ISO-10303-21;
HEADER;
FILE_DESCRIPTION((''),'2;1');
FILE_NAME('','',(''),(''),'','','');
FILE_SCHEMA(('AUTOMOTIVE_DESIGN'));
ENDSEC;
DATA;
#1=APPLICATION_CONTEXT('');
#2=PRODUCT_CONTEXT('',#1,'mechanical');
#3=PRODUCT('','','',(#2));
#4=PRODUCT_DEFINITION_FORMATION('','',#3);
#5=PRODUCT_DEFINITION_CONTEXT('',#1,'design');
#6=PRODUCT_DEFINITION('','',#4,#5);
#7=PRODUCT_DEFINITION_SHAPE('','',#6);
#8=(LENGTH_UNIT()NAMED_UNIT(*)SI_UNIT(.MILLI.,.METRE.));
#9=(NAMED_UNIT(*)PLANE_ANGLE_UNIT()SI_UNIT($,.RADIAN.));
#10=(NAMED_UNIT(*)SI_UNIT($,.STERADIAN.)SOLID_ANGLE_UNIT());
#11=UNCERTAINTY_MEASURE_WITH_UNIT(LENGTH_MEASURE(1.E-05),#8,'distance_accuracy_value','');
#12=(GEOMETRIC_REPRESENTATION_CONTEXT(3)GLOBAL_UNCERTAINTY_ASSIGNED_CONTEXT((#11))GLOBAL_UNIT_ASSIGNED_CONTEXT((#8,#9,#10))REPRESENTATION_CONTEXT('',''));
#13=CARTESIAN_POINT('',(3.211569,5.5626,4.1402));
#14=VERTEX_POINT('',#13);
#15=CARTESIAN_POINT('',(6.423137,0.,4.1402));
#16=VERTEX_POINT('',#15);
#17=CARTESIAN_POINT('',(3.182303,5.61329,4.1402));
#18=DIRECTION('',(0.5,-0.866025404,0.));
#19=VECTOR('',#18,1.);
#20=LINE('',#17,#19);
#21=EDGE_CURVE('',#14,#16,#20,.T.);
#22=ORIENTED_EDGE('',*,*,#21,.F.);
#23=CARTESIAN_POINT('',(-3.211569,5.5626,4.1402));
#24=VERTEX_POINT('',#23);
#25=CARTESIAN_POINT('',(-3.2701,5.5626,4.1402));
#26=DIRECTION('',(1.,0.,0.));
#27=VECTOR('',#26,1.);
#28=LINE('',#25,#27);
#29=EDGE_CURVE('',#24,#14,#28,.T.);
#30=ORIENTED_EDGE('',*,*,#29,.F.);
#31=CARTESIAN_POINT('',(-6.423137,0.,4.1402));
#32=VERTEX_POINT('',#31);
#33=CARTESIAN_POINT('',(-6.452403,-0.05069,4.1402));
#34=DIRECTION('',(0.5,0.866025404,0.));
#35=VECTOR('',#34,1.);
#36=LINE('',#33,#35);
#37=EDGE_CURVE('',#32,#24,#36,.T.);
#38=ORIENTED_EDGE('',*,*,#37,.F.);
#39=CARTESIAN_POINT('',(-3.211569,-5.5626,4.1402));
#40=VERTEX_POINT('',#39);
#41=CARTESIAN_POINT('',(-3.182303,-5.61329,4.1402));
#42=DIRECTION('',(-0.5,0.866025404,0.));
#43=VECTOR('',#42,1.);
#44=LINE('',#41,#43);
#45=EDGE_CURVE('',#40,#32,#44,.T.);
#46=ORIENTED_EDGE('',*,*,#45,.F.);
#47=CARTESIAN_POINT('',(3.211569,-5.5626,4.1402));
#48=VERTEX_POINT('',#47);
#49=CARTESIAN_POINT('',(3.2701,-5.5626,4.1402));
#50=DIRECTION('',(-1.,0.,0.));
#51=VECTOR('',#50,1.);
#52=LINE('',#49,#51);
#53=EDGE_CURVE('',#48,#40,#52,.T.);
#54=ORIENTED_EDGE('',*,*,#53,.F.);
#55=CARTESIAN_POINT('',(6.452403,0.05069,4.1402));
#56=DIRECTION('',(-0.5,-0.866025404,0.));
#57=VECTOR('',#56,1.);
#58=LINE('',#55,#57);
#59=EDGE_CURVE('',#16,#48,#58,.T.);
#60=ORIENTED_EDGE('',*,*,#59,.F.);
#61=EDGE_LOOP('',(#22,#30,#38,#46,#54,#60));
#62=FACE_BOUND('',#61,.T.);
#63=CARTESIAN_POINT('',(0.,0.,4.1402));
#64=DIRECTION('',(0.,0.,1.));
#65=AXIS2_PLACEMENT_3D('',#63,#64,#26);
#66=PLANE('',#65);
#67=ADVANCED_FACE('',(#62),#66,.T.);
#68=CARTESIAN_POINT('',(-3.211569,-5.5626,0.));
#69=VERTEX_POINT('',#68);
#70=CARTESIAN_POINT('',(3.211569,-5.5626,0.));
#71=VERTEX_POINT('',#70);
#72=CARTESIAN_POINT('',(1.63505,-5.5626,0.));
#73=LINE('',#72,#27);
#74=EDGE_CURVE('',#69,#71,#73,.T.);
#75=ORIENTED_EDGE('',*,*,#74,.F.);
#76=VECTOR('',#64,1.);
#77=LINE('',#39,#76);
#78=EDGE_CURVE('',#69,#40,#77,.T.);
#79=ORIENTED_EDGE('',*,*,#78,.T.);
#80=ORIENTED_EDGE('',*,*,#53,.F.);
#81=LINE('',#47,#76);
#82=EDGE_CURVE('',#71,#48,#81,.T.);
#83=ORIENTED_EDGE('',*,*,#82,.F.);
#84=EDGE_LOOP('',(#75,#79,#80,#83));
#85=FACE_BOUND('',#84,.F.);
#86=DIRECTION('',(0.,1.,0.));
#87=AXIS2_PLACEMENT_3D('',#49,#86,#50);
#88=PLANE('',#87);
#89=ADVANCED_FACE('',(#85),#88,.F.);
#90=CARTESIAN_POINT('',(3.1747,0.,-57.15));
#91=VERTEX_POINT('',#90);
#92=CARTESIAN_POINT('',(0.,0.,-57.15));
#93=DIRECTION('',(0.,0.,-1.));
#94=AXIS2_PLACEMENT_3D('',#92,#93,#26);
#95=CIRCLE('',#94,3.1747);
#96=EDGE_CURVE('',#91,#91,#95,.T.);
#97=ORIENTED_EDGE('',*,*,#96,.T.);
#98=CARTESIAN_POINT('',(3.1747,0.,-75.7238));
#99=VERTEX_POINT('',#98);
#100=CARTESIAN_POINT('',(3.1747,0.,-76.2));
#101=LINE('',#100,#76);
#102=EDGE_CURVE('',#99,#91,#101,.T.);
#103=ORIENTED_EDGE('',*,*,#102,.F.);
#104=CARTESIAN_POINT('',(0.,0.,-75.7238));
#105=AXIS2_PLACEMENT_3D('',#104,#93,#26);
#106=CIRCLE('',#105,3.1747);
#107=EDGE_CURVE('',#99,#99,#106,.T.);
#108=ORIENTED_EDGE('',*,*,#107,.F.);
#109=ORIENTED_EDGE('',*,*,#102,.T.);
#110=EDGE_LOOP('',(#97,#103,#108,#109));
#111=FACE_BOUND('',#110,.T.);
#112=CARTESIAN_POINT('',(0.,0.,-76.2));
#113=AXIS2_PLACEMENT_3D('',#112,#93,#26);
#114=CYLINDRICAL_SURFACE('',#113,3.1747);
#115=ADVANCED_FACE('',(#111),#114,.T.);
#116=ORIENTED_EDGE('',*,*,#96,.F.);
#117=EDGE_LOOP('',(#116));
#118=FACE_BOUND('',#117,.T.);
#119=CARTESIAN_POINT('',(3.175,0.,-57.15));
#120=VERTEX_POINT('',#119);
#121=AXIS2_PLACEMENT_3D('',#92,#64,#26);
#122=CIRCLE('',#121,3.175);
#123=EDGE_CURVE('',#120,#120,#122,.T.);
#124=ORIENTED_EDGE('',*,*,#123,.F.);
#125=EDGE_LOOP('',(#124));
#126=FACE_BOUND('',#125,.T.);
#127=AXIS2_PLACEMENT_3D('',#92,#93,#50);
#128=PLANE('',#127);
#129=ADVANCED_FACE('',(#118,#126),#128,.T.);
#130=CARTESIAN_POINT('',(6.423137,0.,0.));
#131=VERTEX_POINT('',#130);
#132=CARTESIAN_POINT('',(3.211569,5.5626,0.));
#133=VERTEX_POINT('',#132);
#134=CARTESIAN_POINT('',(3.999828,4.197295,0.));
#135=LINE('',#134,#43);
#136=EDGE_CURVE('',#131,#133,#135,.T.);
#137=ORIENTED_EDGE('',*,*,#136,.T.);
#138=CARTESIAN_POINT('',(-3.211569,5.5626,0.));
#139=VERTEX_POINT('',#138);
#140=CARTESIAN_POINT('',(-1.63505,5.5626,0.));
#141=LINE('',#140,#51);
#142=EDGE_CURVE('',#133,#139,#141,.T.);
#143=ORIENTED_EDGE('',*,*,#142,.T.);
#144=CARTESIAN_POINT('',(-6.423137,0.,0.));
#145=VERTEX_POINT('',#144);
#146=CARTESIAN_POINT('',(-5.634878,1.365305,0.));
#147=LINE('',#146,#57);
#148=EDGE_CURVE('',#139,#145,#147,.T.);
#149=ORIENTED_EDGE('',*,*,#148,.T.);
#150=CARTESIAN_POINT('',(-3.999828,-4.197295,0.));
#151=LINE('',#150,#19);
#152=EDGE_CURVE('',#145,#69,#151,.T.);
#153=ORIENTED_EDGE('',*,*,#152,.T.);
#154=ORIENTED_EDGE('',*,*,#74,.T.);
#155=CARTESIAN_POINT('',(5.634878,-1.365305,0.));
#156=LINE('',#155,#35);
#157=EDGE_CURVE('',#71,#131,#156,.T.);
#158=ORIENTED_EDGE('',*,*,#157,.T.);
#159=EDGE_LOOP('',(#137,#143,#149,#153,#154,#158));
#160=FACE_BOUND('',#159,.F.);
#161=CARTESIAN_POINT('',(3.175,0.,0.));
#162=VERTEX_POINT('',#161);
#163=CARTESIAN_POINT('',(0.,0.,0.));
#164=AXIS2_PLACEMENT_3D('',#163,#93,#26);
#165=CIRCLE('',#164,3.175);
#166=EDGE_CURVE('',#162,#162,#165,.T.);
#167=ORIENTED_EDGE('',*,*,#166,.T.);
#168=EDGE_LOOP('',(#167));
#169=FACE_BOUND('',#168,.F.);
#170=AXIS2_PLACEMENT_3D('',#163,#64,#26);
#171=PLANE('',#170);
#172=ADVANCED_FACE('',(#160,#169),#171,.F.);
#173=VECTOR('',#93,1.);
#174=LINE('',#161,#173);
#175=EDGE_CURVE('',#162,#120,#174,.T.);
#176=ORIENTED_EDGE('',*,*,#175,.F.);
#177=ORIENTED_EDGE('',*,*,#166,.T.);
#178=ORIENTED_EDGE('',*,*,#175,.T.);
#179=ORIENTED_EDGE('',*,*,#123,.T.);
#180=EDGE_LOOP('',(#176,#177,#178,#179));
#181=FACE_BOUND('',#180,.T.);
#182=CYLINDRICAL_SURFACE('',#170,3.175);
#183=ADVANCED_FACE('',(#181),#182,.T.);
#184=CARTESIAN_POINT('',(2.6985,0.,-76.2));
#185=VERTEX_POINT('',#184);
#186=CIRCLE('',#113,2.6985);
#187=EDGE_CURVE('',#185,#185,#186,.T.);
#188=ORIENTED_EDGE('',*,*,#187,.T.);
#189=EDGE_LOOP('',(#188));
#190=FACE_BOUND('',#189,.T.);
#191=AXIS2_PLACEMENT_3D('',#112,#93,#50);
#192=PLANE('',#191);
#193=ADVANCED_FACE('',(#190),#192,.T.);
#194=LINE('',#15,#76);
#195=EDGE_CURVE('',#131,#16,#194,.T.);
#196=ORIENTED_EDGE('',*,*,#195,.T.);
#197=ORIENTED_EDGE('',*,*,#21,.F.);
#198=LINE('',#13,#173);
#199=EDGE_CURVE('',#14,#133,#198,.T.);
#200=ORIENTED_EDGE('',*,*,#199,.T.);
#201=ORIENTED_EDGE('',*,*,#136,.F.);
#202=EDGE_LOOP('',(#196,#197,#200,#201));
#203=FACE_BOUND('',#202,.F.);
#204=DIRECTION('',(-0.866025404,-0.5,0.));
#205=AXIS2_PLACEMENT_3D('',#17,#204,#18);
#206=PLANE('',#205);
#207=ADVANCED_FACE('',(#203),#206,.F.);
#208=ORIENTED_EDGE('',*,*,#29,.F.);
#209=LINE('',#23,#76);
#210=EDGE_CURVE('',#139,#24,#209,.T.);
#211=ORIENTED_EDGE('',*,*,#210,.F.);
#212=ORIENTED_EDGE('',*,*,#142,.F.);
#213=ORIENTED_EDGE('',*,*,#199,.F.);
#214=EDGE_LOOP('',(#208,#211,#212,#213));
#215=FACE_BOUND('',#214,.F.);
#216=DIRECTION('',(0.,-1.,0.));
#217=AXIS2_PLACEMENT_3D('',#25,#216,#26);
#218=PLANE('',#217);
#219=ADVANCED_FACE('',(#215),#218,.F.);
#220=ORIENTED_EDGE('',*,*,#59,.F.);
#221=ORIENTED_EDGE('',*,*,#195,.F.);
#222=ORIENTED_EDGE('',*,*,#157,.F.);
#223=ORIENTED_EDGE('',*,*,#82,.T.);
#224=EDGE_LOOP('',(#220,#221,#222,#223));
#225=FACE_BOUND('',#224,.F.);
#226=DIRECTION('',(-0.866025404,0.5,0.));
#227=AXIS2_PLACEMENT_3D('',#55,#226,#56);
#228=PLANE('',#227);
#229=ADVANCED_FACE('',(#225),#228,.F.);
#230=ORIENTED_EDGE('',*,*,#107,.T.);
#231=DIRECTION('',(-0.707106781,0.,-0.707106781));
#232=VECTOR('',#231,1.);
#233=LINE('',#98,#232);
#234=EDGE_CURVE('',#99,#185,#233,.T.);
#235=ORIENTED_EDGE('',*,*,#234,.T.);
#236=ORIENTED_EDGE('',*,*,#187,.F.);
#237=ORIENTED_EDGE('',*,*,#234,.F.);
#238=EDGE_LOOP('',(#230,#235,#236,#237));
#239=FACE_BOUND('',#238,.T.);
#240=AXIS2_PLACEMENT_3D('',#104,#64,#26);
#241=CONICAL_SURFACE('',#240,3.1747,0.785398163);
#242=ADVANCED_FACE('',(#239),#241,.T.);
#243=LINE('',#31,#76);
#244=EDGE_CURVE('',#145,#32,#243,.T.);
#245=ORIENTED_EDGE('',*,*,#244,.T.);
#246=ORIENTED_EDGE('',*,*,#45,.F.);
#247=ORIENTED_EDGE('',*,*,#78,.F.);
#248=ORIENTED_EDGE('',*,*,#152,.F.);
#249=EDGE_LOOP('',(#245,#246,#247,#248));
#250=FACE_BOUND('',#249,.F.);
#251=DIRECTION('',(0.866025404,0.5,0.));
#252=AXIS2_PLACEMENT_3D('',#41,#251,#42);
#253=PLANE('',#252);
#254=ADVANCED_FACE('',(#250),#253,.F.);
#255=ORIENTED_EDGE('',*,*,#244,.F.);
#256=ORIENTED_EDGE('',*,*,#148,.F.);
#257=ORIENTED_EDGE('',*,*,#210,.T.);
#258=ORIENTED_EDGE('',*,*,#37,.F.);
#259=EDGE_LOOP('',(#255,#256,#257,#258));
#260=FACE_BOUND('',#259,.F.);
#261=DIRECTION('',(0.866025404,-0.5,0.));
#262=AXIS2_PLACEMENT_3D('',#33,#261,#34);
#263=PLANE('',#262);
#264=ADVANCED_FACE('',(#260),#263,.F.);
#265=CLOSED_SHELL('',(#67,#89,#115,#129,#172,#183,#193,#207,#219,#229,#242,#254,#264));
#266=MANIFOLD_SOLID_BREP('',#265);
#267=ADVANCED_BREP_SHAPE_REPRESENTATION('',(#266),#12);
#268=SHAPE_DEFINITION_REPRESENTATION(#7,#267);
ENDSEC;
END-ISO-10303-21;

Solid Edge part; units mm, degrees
sketch "Sketch1" plane through (0, 0, 0) normal (0, 0, 1) x (1, 0, 0)
  circle A0 centre (0, 0) radius 6.4526
  dimension "D1" = 12.9052
extrude "Protrusion1" add sketch "Sketch1" along normal blind 4.1402
sketch "Sketch2" plane through (0, 0, 0) normal (0, 0, -1) x (1, 0, 0)
  circle A0 centre (0, 0) radius 3.175
extrude "Protrusion2" add sketch "Sketch2" along normal blind 76.2
sketch "Sketch3" plane through (0, 0, -76.2) normal (0, 0, -1) x (1, 0, 0)
  circle A0 centre (0, 0) radius 3.1747
extrude "Cutout1" cut sketch "Sketch3" against normal blind 19.05 flip side to cut
chamfer "Chamfer_1" distance 0.4762 angle 45 1 edges at (-3.1747, 0, -76.2)
sketch "Sketch4" plane through (0, 0, 4.1402) normal (0, 0, 1) x (1, 0, 0)
  line L0 (-3.2701, 5.5626) -> (3.2701, 5.5626)
  dimension "D1" = 11.1252
extrude "Cutout2" cut sketch "Sketch4" against normal up to next material side at (0, 5.6126, 4.1402)
pattern_circular "Pattern1" count 6 over 360 about axis through (0, 0, 4.1402) along (0, 0, 1) of "Cutout2"
properties part number "24100006"
